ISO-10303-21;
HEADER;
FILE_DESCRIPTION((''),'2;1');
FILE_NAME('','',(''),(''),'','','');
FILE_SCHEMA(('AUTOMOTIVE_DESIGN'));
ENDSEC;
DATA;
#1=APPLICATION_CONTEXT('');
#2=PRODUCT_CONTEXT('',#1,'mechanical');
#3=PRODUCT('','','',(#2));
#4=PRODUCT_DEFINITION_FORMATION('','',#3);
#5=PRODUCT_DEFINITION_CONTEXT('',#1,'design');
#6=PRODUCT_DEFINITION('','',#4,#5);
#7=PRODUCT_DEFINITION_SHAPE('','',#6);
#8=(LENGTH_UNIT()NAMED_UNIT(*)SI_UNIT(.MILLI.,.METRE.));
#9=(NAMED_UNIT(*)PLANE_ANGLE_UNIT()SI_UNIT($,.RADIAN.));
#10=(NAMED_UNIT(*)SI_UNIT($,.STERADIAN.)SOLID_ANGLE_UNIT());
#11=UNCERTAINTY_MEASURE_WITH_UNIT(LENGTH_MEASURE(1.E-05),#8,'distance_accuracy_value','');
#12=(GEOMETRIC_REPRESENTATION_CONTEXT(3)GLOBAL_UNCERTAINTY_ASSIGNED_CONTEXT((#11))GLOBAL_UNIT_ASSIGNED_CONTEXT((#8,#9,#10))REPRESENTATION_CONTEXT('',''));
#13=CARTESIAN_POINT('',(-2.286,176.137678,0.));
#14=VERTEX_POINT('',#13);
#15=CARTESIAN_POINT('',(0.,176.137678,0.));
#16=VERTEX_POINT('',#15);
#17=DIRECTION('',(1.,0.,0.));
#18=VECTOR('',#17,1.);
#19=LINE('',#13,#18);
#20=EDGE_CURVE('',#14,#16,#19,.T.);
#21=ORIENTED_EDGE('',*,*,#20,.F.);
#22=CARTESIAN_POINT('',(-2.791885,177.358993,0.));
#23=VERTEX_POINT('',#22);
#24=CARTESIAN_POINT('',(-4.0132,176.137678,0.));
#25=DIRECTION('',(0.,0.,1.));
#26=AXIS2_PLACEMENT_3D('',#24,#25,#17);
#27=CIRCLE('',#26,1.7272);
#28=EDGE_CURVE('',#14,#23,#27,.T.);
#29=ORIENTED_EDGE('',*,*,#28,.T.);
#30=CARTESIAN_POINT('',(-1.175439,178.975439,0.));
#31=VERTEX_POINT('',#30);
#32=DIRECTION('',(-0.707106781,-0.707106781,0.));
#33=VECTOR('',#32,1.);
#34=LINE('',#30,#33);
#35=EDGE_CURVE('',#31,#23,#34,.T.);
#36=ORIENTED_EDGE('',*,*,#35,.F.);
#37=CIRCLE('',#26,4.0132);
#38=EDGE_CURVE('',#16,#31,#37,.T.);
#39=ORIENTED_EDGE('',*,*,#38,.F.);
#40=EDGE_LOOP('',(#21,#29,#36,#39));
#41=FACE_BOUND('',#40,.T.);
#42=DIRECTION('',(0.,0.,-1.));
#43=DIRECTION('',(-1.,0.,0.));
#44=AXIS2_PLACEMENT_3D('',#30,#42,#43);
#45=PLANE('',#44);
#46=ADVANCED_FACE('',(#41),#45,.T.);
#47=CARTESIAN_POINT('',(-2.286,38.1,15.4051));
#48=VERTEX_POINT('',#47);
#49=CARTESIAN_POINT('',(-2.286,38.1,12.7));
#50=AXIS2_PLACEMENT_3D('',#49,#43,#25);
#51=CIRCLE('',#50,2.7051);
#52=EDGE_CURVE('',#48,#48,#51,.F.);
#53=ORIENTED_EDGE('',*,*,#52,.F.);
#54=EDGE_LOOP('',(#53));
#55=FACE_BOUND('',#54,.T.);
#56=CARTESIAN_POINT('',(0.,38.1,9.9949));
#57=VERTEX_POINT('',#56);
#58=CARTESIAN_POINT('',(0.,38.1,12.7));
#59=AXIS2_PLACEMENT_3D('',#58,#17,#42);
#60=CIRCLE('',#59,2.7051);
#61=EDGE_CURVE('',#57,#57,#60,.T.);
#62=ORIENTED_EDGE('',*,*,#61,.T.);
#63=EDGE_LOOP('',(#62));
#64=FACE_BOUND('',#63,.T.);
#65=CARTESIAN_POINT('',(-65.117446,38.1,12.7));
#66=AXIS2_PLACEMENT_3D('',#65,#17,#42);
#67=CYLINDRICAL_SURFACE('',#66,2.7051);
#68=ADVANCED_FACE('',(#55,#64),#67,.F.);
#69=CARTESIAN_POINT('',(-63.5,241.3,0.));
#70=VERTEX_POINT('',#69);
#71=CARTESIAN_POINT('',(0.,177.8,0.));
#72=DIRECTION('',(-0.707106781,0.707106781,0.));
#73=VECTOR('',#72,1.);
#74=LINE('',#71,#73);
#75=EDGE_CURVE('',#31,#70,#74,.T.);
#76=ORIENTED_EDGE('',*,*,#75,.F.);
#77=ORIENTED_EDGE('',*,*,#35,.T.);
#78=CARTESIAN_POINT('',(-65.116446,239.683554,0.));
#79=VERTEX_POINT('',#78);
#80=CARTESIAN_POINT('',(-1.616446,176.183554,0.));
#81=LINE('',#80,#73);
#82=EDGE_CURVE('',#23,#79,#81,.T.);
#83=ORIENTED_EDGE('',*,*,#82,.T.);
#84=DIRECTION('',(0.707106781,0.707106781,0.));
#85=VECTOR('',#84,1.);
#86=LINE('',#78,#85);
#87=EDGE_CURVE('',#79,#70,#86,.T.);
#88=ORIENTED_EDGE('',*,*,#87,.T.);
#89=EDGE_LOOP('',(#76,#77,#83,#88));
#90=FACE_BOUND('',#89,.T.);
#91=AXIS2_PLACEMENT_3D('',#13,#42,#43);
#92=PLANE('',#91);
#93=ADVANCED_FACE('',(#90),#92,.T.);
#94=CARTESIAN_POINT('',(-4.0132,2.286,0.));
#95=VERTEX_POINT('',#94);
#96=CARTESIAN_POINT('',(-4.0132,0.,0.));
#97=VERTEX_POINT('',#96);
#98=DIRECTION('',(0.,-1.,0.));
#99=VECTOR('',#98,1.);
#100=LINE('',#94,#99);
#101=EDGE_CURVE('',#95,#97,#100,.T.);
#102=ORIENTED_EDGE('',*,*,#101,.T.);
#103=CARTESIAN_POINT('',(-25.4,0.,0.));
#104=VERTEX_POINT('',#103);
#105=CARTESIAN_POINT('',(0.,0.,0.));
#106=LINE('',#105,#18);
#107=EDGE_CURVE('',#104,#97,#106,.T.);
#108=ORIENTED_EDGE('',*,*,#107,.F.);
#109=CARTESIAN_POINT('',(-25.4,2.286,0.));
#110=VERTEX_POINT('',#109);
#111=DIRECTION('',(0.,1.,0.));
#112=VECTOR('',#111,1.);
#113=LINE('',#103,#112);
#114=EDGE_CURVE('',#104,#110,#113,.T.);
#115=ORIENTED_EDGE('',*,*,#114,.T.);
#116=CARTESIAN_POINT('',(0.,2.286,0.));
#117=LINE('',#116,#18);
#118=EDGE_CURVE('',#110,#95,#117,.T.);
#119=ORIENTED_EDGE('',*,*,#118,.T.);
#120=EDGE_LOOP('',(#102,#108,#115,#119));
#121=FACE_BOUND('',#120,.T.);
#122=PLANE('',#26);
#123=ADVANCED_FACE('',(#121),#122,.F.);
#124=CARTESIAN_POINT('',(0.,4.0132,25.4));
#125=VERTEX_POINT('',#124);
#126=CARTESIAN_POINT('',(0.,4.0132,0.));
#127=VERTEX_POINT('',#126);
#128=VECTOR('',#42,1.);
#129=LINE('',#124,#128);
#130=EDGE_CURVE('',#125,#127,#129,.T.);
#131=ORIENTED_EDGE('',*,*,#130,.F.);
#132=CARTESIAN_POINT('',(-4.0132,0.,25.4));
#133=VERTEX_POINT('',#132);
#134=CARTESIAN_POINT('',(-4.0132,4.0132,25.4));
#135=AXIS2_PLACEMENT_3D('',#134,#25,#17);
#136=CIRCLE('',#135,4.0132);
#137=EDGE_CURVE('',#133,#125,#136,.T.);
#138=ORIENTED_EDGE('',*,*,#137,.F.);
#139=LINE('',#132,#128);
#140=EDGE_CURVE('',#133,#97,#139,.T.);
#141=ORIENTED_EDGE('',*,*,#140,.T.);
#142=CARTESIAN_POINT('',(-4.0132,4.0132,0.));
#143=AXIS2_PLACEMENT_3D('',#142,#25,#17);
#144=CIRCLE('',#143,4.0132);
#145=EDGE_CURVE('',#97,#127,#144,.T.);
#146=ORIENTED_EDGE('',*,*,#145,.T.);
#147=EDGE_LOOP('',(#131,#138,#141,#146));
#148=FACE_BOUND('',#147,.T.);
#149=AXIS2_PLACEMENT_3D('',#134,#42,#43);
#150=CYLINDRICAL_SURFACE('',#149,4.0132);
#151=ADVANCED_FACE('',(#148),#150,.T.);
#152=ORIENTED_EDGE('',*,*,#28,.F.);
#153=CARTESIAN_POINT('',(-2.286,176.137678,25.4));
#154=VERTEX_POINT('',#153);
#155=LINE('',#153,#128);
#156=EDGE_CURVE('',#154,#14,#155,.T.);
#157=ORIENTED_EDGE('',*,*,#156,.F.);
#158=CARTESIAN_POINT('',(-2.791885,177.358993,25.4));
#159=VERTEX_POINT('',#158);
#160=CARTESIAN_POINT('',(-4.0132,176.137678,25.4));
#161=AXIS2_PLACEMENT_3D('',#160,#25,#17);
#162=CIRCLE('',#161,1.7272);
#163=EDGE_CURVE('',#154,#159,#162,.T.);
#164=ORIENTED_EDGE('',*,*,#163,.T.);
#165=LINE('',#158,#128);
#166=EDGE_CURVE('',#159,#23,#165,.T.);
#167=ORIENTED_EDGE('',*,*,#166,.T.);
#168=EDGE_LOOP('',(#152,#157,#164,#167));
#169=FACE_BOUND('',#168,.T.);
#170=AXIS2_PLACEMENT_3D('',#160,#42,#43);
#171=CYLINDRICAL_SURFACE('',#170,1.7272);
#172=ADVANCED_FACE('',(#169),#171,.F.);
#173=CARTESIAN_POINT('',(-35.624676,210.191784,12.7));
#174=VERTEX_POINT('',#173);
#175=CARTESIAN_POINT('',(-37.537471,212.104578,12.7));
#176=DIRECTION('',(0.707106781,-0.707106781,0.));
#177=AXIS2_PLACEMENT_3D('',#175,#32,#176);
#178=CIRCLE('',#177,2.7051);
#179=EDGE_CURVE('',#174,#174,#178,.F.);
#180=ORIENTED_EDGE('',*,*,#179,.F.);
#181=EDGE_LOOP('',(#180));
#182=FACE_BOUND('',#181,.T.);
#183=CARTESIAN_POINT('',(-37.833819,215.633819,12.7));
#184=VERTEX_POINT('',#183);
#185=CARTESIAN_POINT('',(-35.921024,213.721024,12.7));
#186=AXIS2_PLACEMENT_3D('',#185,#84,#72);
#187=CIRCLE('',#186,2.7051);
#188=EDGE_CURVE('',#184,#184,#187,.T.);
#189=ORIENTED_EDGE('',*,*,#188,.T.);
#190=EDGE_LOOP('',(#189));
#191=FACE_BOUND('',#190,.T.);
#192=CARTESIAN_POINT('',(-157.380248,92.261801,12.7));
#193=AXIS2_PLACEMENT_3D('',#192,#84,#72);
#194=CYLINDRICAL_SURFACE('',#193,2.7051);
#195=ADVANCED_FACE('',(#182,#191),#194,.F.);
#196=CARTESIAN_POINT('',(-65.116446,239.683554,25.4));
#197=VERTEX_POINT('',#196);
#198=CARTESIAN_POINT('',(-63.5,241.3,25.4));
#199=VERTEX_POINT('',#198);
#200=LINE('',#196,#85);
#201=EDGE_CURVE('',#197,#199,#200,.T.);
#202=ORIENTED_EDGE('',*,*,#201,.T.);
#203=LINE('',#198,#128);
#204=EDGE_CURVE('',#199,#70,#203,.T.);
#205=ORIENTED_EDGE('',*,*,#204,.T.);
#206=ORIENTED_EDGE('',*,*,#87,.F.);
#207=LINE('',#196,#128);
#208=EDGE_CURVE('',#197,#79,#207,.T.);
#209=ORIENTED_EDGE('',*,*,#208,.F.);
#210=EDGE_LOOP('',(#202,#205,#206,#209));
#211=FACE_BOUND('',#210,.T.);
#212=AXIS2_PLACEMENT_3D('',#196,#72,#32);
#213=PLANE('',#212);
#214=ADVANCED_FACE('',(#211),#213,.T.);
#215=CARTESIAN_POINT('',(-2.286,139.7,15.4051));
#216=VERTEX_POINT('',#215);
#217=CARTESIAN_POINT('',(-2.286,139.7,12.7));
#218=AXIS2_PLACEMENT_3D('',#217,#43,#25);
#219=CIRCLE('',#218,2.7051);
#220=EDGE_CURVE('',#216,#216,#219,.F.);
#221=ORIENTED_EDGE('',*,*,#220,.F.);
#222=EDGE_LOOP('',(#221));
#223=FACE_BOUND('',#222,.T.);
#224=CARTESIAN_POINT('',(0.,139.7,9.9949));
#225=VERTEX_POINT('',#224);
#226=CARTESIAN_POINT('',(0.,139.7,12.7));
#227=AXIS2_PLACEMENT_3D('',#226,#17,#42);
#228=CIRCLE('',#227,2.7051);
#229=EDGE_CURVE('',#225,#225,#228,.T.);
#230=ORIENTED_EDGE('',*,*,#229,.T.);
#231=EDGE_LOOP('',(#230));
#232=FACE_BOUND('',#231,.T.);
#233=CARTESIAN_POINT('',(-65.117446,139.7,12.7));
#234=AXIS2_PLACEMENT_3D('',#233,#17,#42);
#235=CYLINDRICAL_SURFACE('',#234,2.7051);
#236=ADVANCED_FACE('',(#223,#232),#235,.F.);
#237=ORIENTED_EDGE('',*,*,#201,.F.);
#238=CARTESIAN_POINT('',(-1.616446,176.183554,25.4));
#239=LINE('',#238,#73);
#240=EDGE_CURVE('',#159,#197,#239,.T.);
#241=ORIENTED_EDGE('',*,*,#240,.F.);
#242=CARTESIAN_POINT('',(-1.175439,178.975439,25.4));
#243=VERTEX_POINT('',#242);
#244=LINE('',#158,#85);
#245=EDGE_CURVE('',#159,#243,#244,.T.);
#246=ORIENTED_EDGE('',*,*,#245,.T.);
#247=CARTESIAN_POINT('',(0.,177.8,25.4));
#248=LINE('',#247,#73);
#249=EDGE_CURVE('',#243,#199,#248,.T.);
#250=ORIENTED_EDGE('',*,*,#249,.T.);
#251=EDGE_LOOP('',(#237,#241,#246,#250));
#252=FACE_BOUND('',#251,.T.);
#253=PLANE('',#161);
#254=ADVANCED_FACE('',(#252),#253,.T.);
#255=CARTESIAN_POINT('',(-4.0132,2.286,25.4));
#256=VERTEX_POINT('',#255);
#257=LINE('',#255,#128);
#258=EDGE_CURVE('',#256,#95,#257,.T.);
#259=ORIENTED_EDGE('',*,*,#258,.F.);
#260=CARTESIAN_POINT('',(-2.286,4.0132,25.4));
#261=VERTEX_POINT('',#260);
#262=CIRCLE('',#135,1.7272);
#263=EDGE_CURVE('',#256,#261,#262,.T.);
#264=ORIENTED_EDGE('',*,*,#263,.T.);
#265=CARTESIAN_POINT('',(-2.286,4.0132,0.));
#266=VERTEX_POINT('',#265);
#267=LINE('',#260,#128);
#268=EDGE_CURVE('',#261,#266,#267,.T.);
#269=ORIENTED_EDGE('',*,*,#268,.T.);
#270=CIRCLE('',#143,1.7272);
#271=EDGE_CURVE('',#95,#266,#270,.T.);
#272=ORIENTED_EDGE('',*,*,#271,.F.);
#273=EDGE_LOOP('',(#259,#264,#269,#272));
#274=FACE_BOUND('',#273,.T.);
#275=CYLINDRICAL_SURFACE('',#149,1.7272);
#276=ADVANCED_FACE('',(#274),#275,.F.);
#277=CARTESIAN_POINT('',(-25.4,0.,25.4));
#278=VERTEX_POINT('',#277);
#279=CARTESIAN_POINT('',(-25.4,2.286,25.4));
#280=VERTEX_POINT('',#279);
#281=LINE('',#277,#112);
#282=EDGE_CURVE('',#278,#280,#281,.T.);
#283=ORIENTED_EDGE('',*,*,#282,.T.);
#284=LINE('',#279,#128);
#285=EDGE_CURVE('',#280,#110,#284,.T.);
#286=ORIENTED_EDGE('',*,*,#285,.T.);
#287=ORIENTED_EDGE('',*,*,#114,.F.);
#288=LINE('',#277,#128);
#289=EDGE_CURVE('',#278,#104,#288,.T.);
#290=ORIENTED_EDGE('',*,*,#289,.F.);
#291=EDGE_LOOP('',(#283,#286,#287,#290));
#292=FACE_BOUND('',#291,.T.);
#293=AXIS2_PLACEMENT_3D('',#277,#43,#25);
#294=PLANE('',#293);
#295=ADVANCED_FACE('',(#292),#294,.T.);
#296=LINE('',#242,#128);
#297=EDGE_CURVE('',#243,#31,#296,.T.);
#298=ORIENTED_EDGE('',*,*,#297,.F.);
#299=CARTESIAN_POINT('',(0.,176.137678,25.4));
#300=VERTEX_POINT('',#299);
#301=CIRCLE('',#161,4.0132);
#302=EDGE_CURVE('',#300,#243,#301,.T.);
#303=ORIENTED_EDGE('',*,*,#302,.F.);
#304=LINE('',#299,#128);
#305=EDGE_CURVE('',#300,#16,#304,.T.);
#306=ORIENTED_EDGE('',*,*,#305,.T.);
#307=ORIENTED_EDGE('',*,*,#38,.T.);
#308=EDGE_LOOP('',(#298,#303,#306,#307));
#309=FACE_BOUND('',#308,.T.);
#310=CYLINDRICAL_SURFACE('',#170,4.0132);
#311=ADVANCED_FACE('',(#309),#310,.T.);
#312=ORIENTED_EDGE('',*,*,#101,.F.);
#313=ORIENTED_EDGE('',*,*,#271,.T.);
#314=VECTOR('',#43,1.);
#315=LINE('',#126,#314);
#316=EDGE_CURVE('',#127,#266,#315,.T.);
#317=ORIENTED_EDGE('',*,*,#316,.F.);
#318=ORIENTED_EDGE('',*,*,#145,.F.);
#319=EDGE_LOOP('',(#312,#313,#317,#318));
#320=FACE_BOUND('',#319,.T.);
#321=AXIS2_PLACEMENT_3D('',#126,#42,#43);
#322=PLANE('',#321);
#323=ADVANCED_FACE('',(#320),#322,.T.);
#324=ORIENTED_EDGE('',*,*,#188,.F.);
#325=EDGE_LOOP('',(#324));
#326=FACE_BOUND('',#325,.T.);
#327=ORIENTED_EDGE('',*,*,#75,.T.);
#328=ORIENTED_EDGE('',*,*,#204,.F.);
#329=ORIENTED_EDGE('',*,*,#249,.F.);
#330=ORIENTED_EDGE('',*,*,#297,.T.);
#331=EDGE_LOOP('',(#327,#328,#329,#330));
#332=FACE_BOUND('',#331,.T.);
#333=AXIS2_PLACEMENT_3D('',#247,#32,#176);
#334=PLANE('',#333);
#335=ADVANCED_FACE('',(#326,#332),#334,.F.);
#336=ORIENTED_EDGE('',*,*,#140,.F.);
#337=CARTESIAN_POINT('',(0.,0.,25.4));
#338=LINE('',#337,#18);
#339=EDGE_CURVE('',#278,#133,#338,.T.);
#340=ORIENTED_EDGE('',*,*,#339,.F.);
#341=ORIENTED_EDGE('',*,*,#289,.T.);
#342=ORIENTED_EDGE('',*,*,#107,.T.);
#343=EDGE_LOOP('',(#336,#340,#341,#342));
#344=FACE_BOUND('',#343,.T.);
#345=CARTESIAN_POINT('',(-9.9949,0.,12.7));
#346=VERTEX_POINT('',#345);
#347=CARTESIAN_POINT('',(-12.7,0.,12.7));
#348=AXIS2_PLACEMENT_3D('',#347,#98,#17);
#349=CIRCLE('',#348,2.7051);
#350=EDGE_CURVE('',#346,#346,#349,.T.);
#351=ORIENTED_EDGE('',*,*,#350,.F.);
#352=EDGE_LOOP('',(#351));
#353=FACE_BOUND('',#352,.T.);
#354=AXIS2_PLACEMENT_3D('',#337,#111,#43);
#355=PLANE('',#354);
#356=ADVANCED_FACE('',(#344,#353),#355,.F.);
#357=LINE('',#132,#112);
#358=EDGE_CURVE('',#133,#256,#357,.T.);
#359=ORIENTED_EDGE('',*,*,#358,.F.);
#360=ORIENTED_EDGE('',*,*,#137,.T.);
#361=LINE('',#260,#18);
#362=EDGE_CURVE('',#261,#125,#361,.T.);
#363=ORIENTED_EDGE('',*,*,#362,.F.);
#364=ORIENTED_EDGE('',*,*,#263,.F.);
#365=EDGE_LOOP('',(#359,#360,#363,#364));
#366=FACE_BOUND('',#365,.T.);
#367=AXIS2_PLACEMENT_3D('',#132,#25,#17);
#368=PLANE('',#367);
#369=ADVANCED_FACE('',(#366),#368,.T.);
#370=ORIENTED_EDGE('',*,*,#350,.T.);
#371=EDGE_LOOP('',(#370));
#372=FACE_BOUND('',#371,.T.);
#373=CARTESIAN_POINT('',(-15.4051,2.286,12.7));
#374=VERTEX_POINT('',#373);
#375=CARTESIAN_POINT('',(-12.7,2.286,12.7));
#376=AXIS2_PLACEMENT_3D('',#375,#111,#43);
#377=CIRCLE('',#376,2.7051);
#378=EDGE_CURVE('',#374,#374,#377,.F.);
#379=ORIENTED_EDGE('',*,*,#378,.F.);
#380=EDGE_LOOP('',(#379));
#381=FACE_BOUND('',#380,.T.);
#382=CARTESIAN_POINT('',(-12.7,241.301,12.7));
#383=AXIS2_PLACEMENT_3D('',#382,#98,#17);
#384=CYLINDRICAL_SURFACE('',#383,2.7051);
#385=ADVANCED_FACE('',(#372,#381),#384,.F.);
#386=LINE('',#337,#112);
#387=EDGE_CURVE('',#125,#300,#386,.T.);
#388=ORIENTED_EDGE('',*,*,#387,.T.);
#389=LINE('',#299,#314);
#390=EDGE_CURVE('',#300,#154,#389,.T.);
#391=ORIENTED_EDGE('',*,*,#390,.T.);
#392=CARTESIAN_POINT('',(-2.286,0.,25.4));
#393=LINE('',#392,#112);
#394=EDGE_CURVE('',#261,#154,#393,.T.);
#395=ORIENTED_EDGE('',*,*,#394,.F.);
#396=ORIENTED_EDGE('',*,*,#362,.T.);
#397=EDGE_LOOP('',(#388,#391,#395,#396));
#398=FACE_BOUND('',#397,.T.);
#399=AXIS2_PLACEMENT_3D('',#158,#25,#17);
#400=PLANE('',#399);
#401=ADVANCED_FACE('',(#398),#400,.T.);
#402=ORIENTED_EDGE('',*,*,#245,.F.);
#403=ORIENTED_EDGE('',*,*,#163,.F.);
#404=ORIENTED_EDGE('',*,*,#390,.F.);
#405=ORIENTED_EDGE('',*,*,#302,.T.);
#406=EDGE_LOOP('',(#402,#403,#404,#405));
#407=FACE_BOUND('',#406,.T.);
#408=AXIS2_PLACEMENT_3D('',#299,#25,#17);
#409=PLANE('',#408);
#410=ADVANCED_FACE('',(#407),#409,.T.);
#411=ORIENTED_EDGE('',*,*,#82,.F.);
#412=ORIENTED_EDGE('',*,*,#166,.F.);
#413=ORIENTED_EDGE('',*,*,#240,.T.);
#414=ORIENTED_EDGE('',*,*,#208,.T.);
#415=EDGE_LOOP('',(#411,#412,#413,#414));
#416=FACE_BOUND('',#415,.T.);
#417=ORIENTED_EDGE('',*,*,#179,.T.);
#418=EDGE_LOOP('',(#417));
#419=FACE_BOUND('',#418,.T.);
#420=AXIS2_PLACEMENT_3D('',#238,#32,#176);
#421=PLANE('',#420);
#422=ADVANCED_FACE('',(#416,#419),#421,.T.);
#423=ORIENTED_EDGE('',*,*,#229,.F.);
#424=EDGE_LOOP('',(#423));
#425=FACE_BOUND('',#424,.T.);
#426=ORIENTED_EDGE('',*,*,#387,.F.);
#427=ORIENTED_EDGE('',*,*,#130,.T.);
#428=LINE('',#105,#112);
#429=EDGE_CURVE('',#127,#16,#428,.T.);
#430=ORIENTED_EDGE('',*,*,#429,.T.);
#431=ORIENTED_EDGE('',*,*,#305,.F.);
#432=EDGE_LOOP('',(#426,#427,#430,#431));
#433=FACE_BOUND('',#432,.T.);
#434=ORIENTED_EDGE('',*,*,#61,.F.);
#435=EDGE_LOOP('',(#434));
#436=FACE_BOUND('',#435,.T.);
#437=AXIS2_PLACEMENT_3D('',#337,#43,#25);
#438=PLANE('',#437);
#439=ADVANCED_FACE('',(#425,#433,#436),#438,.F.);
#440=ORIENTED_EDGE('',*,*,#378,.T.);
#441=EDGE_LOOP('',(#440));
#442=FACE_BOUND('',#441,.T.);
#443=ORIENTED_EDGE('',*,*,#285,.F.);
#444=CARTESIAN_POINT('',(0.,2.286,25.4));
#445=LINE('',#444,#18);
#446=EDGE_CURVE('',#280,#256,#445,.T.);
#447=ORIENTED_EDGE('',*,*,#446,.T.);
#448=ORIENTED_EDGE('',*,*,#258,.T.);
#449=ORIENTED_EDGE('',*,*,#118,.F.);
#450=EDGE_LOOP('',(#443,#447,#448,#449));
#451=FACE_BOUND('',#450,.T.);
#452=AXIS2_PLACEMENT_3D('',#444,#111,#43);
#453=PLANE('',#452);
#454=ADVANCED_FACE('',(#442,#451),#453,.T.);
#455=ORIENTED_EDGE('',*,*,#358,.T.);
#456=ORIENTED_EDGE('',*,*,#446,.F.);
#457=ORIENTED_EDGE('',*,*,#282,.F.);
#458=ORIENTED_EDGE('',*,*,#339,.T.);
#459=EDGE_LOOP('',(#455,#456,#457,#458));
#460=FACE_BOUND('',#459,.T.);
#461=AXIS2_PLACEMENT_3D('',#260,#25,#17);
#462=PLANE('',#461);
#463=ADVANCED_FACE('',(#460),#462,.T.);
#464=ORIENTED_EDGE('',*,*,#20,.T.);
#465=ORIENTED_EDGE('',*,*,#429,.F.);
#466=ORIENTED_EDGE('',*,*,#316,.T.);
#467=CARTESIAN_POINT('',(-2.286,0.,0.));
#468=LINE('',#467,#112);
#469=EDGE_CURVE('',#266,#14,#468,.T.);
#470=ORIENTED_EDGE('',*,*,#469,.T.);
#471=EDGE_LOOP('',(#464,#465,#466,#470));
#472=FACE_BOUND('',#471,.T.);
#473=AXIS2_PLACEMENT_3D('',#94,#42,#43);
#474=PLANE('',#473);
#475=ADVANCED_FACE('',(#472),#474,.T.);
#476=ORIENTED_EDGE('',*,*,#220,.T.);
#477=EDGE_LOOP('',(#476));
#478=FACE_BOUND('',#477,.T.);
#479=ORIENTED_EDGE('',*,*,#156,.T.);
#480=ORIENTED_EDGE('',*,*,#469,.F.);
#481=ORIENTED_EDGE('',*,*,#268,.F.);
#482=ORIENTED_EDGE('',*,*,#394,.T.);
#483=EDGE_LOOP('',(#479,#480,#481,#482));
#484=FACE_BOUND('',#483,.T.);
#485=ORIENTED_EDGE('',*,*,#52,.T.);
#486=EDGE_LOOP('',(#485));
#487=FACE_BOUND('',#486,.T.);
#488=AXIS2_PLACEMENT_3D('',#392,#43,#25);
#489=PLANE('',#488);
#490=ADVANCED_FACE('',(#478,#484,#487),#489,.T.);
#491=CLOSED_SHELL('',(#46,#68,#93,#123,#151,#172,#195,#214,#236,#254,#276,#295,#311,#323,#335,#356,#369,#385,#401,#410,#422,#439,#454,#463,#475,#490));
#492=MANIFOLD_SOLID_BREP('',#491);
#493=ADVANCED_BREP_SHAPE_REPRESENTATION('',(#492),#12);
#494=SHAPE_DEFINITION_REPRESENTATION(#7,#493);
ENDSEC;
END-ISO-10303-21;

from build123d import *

# Parameters (mm, degrees)
BASE_FLANGE1_DEPTH = 25.4
CUT_EXTRUDE1_REACH = 253.219
SKETCH3_R          = 2.7051
CUT_EXTRUDE2_REACH = 220.156
SKETCH4_R          = 2.7051
CUT_EXTRUDE3_REACH = 253.219
SKETCH5_R          = 2.7051


# Sheet-metal steps are written as plain solids
with BuildPart() as part:
    # Sketch1 → Base-Flange1 (new body)
    with BuildSketch(Plane.XY):
        with BuildLine():
            Line((-25.4, 0), (-4.0132, 0))
            ThreePointArc((-4.0132, 0), (-1.175439066, 1.175439066), (0, 4.0132))
            Line((0, 4.0132), (0, 176.137678131))
            ThreePointArc((0, 176.137678131), (-0.30548666, 177.673463282), (-1.175439066, 178.975439066))
            Line((-1.175439066, 178.975439066), (-63.5, 241.3))
            Line((-63.5, 241.3), (-65.116446102, 239.683553898))
            Line((-65.116446102, 239.683553898), (-2.791885168, 177.358992964))
            ThreePointArc((-2.791885168, 177.358992964), (-2.417475271, 176.798648956), (-2.286, 176.137678131))
            Line((-2.286, 176.137678131), (-2.286, 4.0132))
            ThreePointArc((-2.286, 4.0132), (-2.791885168, 2.791885168), (-4.0132, 2.286))
            Line((-4.0132, 2.286), (-25.4, 2.286))
            Line((-25.4, 2.286), (-25.4, 0))
        make_face()
    extrude(amount=BASE_FLANGE1_DEPTH)

    # Sketch3 → Cut-Extrude1 (cut, up to next)
    with BuildSketch(Plane(origin=(0, 0, 0), x_dir=(0, 0, -1), z_dir=(1, 0, 0)), mode=Mode.PRIVATE) as cut_extrude1_sk1:
        with Locations((-12.7, 38.1)):
            Circle(SKETCH3_R)
    cut_extrude1_tool1 = extrude(cut_extrude1_sk1.sketch, amount=-CUT_EXTRUDE1_REACH, mode=Mode.PRIVATE) & part.part
    # Sketch3 → Cut-Extrude1 (cut, up to next)
    with BuildSketch(Plane(origin=(0, 0, 0), x_dir=(0, 0, -1), z_dir=(1, 0, 0)), mode=Mode.PRIVATE) as cut_extrude1_sk2:
        with Locations((-12.7, 139.7)):
            Circle(SKETCH3_R)
    cut_extrude1_tool2 = extrude(cut_extrude1_sk2.sketch, amount=-CUT_EXTRUDE1_REACH, mode=Mode.PRIVATE) & part.part
    add(cut_extrude1_tool1.solids().sort_by_distance((0, 38.1, 12.7))[0], mode=Mode.SUBTRACT)
    add(cut_extrude1_tool2.solids().sort_by_distance((0, 139.7, 12.7))[0], mode=Mode.SUBTRACT)

    # Sketch4 → Cut-Extrude2 (cut, up to next)
    with BuildSketch(Plane(origin=(88.9, 88.9, 0), x_dir=(0, 0, -1), z_dir=(0.7071067811865462, 0.7071067811865489, 0)), mode=Mode.PRIVATE) as cut_extrude2_sk1:
        with Locations(Location((-12.7, 176.523585695, 0), (0, 0, 90))):
            Circle(SKETCH4_R)
    cut_extrude2_tool1 = extrude(cut_extrude2_sk1.sketch, amount=-CUT_EXTRUDE2_REACH, mode=Mode.PRIVATE) & part.part
    add(cut_extrude2_tool1.solids().sort_by_distance((-35.921024, 213.721024, 12.7))[0], mode=Mode.SUBTRACT)

    # Sketch5 → Cut-Extrude3 (cut, up to next)
    with BuildSketch(Plane.XZ, mode=Mode.PRIVATE) as cut_extrude3_sk1:
        with Locations((-12.7, 12.7)):
            Circle(SKETCH5_R)
    cut_extrude3_tool1 = extrude(cut_extrude3_sk1.sketch, amount=-CUT_EXTRUDE3_REACH, mode=Mode.PRIVATE) & part.part
    add(cut_extrude3_tool1.solids().sort_by_distance((-12.7, 0, 12.7))[0], mode=Mode.SUBTRACT)


solid = part.part
